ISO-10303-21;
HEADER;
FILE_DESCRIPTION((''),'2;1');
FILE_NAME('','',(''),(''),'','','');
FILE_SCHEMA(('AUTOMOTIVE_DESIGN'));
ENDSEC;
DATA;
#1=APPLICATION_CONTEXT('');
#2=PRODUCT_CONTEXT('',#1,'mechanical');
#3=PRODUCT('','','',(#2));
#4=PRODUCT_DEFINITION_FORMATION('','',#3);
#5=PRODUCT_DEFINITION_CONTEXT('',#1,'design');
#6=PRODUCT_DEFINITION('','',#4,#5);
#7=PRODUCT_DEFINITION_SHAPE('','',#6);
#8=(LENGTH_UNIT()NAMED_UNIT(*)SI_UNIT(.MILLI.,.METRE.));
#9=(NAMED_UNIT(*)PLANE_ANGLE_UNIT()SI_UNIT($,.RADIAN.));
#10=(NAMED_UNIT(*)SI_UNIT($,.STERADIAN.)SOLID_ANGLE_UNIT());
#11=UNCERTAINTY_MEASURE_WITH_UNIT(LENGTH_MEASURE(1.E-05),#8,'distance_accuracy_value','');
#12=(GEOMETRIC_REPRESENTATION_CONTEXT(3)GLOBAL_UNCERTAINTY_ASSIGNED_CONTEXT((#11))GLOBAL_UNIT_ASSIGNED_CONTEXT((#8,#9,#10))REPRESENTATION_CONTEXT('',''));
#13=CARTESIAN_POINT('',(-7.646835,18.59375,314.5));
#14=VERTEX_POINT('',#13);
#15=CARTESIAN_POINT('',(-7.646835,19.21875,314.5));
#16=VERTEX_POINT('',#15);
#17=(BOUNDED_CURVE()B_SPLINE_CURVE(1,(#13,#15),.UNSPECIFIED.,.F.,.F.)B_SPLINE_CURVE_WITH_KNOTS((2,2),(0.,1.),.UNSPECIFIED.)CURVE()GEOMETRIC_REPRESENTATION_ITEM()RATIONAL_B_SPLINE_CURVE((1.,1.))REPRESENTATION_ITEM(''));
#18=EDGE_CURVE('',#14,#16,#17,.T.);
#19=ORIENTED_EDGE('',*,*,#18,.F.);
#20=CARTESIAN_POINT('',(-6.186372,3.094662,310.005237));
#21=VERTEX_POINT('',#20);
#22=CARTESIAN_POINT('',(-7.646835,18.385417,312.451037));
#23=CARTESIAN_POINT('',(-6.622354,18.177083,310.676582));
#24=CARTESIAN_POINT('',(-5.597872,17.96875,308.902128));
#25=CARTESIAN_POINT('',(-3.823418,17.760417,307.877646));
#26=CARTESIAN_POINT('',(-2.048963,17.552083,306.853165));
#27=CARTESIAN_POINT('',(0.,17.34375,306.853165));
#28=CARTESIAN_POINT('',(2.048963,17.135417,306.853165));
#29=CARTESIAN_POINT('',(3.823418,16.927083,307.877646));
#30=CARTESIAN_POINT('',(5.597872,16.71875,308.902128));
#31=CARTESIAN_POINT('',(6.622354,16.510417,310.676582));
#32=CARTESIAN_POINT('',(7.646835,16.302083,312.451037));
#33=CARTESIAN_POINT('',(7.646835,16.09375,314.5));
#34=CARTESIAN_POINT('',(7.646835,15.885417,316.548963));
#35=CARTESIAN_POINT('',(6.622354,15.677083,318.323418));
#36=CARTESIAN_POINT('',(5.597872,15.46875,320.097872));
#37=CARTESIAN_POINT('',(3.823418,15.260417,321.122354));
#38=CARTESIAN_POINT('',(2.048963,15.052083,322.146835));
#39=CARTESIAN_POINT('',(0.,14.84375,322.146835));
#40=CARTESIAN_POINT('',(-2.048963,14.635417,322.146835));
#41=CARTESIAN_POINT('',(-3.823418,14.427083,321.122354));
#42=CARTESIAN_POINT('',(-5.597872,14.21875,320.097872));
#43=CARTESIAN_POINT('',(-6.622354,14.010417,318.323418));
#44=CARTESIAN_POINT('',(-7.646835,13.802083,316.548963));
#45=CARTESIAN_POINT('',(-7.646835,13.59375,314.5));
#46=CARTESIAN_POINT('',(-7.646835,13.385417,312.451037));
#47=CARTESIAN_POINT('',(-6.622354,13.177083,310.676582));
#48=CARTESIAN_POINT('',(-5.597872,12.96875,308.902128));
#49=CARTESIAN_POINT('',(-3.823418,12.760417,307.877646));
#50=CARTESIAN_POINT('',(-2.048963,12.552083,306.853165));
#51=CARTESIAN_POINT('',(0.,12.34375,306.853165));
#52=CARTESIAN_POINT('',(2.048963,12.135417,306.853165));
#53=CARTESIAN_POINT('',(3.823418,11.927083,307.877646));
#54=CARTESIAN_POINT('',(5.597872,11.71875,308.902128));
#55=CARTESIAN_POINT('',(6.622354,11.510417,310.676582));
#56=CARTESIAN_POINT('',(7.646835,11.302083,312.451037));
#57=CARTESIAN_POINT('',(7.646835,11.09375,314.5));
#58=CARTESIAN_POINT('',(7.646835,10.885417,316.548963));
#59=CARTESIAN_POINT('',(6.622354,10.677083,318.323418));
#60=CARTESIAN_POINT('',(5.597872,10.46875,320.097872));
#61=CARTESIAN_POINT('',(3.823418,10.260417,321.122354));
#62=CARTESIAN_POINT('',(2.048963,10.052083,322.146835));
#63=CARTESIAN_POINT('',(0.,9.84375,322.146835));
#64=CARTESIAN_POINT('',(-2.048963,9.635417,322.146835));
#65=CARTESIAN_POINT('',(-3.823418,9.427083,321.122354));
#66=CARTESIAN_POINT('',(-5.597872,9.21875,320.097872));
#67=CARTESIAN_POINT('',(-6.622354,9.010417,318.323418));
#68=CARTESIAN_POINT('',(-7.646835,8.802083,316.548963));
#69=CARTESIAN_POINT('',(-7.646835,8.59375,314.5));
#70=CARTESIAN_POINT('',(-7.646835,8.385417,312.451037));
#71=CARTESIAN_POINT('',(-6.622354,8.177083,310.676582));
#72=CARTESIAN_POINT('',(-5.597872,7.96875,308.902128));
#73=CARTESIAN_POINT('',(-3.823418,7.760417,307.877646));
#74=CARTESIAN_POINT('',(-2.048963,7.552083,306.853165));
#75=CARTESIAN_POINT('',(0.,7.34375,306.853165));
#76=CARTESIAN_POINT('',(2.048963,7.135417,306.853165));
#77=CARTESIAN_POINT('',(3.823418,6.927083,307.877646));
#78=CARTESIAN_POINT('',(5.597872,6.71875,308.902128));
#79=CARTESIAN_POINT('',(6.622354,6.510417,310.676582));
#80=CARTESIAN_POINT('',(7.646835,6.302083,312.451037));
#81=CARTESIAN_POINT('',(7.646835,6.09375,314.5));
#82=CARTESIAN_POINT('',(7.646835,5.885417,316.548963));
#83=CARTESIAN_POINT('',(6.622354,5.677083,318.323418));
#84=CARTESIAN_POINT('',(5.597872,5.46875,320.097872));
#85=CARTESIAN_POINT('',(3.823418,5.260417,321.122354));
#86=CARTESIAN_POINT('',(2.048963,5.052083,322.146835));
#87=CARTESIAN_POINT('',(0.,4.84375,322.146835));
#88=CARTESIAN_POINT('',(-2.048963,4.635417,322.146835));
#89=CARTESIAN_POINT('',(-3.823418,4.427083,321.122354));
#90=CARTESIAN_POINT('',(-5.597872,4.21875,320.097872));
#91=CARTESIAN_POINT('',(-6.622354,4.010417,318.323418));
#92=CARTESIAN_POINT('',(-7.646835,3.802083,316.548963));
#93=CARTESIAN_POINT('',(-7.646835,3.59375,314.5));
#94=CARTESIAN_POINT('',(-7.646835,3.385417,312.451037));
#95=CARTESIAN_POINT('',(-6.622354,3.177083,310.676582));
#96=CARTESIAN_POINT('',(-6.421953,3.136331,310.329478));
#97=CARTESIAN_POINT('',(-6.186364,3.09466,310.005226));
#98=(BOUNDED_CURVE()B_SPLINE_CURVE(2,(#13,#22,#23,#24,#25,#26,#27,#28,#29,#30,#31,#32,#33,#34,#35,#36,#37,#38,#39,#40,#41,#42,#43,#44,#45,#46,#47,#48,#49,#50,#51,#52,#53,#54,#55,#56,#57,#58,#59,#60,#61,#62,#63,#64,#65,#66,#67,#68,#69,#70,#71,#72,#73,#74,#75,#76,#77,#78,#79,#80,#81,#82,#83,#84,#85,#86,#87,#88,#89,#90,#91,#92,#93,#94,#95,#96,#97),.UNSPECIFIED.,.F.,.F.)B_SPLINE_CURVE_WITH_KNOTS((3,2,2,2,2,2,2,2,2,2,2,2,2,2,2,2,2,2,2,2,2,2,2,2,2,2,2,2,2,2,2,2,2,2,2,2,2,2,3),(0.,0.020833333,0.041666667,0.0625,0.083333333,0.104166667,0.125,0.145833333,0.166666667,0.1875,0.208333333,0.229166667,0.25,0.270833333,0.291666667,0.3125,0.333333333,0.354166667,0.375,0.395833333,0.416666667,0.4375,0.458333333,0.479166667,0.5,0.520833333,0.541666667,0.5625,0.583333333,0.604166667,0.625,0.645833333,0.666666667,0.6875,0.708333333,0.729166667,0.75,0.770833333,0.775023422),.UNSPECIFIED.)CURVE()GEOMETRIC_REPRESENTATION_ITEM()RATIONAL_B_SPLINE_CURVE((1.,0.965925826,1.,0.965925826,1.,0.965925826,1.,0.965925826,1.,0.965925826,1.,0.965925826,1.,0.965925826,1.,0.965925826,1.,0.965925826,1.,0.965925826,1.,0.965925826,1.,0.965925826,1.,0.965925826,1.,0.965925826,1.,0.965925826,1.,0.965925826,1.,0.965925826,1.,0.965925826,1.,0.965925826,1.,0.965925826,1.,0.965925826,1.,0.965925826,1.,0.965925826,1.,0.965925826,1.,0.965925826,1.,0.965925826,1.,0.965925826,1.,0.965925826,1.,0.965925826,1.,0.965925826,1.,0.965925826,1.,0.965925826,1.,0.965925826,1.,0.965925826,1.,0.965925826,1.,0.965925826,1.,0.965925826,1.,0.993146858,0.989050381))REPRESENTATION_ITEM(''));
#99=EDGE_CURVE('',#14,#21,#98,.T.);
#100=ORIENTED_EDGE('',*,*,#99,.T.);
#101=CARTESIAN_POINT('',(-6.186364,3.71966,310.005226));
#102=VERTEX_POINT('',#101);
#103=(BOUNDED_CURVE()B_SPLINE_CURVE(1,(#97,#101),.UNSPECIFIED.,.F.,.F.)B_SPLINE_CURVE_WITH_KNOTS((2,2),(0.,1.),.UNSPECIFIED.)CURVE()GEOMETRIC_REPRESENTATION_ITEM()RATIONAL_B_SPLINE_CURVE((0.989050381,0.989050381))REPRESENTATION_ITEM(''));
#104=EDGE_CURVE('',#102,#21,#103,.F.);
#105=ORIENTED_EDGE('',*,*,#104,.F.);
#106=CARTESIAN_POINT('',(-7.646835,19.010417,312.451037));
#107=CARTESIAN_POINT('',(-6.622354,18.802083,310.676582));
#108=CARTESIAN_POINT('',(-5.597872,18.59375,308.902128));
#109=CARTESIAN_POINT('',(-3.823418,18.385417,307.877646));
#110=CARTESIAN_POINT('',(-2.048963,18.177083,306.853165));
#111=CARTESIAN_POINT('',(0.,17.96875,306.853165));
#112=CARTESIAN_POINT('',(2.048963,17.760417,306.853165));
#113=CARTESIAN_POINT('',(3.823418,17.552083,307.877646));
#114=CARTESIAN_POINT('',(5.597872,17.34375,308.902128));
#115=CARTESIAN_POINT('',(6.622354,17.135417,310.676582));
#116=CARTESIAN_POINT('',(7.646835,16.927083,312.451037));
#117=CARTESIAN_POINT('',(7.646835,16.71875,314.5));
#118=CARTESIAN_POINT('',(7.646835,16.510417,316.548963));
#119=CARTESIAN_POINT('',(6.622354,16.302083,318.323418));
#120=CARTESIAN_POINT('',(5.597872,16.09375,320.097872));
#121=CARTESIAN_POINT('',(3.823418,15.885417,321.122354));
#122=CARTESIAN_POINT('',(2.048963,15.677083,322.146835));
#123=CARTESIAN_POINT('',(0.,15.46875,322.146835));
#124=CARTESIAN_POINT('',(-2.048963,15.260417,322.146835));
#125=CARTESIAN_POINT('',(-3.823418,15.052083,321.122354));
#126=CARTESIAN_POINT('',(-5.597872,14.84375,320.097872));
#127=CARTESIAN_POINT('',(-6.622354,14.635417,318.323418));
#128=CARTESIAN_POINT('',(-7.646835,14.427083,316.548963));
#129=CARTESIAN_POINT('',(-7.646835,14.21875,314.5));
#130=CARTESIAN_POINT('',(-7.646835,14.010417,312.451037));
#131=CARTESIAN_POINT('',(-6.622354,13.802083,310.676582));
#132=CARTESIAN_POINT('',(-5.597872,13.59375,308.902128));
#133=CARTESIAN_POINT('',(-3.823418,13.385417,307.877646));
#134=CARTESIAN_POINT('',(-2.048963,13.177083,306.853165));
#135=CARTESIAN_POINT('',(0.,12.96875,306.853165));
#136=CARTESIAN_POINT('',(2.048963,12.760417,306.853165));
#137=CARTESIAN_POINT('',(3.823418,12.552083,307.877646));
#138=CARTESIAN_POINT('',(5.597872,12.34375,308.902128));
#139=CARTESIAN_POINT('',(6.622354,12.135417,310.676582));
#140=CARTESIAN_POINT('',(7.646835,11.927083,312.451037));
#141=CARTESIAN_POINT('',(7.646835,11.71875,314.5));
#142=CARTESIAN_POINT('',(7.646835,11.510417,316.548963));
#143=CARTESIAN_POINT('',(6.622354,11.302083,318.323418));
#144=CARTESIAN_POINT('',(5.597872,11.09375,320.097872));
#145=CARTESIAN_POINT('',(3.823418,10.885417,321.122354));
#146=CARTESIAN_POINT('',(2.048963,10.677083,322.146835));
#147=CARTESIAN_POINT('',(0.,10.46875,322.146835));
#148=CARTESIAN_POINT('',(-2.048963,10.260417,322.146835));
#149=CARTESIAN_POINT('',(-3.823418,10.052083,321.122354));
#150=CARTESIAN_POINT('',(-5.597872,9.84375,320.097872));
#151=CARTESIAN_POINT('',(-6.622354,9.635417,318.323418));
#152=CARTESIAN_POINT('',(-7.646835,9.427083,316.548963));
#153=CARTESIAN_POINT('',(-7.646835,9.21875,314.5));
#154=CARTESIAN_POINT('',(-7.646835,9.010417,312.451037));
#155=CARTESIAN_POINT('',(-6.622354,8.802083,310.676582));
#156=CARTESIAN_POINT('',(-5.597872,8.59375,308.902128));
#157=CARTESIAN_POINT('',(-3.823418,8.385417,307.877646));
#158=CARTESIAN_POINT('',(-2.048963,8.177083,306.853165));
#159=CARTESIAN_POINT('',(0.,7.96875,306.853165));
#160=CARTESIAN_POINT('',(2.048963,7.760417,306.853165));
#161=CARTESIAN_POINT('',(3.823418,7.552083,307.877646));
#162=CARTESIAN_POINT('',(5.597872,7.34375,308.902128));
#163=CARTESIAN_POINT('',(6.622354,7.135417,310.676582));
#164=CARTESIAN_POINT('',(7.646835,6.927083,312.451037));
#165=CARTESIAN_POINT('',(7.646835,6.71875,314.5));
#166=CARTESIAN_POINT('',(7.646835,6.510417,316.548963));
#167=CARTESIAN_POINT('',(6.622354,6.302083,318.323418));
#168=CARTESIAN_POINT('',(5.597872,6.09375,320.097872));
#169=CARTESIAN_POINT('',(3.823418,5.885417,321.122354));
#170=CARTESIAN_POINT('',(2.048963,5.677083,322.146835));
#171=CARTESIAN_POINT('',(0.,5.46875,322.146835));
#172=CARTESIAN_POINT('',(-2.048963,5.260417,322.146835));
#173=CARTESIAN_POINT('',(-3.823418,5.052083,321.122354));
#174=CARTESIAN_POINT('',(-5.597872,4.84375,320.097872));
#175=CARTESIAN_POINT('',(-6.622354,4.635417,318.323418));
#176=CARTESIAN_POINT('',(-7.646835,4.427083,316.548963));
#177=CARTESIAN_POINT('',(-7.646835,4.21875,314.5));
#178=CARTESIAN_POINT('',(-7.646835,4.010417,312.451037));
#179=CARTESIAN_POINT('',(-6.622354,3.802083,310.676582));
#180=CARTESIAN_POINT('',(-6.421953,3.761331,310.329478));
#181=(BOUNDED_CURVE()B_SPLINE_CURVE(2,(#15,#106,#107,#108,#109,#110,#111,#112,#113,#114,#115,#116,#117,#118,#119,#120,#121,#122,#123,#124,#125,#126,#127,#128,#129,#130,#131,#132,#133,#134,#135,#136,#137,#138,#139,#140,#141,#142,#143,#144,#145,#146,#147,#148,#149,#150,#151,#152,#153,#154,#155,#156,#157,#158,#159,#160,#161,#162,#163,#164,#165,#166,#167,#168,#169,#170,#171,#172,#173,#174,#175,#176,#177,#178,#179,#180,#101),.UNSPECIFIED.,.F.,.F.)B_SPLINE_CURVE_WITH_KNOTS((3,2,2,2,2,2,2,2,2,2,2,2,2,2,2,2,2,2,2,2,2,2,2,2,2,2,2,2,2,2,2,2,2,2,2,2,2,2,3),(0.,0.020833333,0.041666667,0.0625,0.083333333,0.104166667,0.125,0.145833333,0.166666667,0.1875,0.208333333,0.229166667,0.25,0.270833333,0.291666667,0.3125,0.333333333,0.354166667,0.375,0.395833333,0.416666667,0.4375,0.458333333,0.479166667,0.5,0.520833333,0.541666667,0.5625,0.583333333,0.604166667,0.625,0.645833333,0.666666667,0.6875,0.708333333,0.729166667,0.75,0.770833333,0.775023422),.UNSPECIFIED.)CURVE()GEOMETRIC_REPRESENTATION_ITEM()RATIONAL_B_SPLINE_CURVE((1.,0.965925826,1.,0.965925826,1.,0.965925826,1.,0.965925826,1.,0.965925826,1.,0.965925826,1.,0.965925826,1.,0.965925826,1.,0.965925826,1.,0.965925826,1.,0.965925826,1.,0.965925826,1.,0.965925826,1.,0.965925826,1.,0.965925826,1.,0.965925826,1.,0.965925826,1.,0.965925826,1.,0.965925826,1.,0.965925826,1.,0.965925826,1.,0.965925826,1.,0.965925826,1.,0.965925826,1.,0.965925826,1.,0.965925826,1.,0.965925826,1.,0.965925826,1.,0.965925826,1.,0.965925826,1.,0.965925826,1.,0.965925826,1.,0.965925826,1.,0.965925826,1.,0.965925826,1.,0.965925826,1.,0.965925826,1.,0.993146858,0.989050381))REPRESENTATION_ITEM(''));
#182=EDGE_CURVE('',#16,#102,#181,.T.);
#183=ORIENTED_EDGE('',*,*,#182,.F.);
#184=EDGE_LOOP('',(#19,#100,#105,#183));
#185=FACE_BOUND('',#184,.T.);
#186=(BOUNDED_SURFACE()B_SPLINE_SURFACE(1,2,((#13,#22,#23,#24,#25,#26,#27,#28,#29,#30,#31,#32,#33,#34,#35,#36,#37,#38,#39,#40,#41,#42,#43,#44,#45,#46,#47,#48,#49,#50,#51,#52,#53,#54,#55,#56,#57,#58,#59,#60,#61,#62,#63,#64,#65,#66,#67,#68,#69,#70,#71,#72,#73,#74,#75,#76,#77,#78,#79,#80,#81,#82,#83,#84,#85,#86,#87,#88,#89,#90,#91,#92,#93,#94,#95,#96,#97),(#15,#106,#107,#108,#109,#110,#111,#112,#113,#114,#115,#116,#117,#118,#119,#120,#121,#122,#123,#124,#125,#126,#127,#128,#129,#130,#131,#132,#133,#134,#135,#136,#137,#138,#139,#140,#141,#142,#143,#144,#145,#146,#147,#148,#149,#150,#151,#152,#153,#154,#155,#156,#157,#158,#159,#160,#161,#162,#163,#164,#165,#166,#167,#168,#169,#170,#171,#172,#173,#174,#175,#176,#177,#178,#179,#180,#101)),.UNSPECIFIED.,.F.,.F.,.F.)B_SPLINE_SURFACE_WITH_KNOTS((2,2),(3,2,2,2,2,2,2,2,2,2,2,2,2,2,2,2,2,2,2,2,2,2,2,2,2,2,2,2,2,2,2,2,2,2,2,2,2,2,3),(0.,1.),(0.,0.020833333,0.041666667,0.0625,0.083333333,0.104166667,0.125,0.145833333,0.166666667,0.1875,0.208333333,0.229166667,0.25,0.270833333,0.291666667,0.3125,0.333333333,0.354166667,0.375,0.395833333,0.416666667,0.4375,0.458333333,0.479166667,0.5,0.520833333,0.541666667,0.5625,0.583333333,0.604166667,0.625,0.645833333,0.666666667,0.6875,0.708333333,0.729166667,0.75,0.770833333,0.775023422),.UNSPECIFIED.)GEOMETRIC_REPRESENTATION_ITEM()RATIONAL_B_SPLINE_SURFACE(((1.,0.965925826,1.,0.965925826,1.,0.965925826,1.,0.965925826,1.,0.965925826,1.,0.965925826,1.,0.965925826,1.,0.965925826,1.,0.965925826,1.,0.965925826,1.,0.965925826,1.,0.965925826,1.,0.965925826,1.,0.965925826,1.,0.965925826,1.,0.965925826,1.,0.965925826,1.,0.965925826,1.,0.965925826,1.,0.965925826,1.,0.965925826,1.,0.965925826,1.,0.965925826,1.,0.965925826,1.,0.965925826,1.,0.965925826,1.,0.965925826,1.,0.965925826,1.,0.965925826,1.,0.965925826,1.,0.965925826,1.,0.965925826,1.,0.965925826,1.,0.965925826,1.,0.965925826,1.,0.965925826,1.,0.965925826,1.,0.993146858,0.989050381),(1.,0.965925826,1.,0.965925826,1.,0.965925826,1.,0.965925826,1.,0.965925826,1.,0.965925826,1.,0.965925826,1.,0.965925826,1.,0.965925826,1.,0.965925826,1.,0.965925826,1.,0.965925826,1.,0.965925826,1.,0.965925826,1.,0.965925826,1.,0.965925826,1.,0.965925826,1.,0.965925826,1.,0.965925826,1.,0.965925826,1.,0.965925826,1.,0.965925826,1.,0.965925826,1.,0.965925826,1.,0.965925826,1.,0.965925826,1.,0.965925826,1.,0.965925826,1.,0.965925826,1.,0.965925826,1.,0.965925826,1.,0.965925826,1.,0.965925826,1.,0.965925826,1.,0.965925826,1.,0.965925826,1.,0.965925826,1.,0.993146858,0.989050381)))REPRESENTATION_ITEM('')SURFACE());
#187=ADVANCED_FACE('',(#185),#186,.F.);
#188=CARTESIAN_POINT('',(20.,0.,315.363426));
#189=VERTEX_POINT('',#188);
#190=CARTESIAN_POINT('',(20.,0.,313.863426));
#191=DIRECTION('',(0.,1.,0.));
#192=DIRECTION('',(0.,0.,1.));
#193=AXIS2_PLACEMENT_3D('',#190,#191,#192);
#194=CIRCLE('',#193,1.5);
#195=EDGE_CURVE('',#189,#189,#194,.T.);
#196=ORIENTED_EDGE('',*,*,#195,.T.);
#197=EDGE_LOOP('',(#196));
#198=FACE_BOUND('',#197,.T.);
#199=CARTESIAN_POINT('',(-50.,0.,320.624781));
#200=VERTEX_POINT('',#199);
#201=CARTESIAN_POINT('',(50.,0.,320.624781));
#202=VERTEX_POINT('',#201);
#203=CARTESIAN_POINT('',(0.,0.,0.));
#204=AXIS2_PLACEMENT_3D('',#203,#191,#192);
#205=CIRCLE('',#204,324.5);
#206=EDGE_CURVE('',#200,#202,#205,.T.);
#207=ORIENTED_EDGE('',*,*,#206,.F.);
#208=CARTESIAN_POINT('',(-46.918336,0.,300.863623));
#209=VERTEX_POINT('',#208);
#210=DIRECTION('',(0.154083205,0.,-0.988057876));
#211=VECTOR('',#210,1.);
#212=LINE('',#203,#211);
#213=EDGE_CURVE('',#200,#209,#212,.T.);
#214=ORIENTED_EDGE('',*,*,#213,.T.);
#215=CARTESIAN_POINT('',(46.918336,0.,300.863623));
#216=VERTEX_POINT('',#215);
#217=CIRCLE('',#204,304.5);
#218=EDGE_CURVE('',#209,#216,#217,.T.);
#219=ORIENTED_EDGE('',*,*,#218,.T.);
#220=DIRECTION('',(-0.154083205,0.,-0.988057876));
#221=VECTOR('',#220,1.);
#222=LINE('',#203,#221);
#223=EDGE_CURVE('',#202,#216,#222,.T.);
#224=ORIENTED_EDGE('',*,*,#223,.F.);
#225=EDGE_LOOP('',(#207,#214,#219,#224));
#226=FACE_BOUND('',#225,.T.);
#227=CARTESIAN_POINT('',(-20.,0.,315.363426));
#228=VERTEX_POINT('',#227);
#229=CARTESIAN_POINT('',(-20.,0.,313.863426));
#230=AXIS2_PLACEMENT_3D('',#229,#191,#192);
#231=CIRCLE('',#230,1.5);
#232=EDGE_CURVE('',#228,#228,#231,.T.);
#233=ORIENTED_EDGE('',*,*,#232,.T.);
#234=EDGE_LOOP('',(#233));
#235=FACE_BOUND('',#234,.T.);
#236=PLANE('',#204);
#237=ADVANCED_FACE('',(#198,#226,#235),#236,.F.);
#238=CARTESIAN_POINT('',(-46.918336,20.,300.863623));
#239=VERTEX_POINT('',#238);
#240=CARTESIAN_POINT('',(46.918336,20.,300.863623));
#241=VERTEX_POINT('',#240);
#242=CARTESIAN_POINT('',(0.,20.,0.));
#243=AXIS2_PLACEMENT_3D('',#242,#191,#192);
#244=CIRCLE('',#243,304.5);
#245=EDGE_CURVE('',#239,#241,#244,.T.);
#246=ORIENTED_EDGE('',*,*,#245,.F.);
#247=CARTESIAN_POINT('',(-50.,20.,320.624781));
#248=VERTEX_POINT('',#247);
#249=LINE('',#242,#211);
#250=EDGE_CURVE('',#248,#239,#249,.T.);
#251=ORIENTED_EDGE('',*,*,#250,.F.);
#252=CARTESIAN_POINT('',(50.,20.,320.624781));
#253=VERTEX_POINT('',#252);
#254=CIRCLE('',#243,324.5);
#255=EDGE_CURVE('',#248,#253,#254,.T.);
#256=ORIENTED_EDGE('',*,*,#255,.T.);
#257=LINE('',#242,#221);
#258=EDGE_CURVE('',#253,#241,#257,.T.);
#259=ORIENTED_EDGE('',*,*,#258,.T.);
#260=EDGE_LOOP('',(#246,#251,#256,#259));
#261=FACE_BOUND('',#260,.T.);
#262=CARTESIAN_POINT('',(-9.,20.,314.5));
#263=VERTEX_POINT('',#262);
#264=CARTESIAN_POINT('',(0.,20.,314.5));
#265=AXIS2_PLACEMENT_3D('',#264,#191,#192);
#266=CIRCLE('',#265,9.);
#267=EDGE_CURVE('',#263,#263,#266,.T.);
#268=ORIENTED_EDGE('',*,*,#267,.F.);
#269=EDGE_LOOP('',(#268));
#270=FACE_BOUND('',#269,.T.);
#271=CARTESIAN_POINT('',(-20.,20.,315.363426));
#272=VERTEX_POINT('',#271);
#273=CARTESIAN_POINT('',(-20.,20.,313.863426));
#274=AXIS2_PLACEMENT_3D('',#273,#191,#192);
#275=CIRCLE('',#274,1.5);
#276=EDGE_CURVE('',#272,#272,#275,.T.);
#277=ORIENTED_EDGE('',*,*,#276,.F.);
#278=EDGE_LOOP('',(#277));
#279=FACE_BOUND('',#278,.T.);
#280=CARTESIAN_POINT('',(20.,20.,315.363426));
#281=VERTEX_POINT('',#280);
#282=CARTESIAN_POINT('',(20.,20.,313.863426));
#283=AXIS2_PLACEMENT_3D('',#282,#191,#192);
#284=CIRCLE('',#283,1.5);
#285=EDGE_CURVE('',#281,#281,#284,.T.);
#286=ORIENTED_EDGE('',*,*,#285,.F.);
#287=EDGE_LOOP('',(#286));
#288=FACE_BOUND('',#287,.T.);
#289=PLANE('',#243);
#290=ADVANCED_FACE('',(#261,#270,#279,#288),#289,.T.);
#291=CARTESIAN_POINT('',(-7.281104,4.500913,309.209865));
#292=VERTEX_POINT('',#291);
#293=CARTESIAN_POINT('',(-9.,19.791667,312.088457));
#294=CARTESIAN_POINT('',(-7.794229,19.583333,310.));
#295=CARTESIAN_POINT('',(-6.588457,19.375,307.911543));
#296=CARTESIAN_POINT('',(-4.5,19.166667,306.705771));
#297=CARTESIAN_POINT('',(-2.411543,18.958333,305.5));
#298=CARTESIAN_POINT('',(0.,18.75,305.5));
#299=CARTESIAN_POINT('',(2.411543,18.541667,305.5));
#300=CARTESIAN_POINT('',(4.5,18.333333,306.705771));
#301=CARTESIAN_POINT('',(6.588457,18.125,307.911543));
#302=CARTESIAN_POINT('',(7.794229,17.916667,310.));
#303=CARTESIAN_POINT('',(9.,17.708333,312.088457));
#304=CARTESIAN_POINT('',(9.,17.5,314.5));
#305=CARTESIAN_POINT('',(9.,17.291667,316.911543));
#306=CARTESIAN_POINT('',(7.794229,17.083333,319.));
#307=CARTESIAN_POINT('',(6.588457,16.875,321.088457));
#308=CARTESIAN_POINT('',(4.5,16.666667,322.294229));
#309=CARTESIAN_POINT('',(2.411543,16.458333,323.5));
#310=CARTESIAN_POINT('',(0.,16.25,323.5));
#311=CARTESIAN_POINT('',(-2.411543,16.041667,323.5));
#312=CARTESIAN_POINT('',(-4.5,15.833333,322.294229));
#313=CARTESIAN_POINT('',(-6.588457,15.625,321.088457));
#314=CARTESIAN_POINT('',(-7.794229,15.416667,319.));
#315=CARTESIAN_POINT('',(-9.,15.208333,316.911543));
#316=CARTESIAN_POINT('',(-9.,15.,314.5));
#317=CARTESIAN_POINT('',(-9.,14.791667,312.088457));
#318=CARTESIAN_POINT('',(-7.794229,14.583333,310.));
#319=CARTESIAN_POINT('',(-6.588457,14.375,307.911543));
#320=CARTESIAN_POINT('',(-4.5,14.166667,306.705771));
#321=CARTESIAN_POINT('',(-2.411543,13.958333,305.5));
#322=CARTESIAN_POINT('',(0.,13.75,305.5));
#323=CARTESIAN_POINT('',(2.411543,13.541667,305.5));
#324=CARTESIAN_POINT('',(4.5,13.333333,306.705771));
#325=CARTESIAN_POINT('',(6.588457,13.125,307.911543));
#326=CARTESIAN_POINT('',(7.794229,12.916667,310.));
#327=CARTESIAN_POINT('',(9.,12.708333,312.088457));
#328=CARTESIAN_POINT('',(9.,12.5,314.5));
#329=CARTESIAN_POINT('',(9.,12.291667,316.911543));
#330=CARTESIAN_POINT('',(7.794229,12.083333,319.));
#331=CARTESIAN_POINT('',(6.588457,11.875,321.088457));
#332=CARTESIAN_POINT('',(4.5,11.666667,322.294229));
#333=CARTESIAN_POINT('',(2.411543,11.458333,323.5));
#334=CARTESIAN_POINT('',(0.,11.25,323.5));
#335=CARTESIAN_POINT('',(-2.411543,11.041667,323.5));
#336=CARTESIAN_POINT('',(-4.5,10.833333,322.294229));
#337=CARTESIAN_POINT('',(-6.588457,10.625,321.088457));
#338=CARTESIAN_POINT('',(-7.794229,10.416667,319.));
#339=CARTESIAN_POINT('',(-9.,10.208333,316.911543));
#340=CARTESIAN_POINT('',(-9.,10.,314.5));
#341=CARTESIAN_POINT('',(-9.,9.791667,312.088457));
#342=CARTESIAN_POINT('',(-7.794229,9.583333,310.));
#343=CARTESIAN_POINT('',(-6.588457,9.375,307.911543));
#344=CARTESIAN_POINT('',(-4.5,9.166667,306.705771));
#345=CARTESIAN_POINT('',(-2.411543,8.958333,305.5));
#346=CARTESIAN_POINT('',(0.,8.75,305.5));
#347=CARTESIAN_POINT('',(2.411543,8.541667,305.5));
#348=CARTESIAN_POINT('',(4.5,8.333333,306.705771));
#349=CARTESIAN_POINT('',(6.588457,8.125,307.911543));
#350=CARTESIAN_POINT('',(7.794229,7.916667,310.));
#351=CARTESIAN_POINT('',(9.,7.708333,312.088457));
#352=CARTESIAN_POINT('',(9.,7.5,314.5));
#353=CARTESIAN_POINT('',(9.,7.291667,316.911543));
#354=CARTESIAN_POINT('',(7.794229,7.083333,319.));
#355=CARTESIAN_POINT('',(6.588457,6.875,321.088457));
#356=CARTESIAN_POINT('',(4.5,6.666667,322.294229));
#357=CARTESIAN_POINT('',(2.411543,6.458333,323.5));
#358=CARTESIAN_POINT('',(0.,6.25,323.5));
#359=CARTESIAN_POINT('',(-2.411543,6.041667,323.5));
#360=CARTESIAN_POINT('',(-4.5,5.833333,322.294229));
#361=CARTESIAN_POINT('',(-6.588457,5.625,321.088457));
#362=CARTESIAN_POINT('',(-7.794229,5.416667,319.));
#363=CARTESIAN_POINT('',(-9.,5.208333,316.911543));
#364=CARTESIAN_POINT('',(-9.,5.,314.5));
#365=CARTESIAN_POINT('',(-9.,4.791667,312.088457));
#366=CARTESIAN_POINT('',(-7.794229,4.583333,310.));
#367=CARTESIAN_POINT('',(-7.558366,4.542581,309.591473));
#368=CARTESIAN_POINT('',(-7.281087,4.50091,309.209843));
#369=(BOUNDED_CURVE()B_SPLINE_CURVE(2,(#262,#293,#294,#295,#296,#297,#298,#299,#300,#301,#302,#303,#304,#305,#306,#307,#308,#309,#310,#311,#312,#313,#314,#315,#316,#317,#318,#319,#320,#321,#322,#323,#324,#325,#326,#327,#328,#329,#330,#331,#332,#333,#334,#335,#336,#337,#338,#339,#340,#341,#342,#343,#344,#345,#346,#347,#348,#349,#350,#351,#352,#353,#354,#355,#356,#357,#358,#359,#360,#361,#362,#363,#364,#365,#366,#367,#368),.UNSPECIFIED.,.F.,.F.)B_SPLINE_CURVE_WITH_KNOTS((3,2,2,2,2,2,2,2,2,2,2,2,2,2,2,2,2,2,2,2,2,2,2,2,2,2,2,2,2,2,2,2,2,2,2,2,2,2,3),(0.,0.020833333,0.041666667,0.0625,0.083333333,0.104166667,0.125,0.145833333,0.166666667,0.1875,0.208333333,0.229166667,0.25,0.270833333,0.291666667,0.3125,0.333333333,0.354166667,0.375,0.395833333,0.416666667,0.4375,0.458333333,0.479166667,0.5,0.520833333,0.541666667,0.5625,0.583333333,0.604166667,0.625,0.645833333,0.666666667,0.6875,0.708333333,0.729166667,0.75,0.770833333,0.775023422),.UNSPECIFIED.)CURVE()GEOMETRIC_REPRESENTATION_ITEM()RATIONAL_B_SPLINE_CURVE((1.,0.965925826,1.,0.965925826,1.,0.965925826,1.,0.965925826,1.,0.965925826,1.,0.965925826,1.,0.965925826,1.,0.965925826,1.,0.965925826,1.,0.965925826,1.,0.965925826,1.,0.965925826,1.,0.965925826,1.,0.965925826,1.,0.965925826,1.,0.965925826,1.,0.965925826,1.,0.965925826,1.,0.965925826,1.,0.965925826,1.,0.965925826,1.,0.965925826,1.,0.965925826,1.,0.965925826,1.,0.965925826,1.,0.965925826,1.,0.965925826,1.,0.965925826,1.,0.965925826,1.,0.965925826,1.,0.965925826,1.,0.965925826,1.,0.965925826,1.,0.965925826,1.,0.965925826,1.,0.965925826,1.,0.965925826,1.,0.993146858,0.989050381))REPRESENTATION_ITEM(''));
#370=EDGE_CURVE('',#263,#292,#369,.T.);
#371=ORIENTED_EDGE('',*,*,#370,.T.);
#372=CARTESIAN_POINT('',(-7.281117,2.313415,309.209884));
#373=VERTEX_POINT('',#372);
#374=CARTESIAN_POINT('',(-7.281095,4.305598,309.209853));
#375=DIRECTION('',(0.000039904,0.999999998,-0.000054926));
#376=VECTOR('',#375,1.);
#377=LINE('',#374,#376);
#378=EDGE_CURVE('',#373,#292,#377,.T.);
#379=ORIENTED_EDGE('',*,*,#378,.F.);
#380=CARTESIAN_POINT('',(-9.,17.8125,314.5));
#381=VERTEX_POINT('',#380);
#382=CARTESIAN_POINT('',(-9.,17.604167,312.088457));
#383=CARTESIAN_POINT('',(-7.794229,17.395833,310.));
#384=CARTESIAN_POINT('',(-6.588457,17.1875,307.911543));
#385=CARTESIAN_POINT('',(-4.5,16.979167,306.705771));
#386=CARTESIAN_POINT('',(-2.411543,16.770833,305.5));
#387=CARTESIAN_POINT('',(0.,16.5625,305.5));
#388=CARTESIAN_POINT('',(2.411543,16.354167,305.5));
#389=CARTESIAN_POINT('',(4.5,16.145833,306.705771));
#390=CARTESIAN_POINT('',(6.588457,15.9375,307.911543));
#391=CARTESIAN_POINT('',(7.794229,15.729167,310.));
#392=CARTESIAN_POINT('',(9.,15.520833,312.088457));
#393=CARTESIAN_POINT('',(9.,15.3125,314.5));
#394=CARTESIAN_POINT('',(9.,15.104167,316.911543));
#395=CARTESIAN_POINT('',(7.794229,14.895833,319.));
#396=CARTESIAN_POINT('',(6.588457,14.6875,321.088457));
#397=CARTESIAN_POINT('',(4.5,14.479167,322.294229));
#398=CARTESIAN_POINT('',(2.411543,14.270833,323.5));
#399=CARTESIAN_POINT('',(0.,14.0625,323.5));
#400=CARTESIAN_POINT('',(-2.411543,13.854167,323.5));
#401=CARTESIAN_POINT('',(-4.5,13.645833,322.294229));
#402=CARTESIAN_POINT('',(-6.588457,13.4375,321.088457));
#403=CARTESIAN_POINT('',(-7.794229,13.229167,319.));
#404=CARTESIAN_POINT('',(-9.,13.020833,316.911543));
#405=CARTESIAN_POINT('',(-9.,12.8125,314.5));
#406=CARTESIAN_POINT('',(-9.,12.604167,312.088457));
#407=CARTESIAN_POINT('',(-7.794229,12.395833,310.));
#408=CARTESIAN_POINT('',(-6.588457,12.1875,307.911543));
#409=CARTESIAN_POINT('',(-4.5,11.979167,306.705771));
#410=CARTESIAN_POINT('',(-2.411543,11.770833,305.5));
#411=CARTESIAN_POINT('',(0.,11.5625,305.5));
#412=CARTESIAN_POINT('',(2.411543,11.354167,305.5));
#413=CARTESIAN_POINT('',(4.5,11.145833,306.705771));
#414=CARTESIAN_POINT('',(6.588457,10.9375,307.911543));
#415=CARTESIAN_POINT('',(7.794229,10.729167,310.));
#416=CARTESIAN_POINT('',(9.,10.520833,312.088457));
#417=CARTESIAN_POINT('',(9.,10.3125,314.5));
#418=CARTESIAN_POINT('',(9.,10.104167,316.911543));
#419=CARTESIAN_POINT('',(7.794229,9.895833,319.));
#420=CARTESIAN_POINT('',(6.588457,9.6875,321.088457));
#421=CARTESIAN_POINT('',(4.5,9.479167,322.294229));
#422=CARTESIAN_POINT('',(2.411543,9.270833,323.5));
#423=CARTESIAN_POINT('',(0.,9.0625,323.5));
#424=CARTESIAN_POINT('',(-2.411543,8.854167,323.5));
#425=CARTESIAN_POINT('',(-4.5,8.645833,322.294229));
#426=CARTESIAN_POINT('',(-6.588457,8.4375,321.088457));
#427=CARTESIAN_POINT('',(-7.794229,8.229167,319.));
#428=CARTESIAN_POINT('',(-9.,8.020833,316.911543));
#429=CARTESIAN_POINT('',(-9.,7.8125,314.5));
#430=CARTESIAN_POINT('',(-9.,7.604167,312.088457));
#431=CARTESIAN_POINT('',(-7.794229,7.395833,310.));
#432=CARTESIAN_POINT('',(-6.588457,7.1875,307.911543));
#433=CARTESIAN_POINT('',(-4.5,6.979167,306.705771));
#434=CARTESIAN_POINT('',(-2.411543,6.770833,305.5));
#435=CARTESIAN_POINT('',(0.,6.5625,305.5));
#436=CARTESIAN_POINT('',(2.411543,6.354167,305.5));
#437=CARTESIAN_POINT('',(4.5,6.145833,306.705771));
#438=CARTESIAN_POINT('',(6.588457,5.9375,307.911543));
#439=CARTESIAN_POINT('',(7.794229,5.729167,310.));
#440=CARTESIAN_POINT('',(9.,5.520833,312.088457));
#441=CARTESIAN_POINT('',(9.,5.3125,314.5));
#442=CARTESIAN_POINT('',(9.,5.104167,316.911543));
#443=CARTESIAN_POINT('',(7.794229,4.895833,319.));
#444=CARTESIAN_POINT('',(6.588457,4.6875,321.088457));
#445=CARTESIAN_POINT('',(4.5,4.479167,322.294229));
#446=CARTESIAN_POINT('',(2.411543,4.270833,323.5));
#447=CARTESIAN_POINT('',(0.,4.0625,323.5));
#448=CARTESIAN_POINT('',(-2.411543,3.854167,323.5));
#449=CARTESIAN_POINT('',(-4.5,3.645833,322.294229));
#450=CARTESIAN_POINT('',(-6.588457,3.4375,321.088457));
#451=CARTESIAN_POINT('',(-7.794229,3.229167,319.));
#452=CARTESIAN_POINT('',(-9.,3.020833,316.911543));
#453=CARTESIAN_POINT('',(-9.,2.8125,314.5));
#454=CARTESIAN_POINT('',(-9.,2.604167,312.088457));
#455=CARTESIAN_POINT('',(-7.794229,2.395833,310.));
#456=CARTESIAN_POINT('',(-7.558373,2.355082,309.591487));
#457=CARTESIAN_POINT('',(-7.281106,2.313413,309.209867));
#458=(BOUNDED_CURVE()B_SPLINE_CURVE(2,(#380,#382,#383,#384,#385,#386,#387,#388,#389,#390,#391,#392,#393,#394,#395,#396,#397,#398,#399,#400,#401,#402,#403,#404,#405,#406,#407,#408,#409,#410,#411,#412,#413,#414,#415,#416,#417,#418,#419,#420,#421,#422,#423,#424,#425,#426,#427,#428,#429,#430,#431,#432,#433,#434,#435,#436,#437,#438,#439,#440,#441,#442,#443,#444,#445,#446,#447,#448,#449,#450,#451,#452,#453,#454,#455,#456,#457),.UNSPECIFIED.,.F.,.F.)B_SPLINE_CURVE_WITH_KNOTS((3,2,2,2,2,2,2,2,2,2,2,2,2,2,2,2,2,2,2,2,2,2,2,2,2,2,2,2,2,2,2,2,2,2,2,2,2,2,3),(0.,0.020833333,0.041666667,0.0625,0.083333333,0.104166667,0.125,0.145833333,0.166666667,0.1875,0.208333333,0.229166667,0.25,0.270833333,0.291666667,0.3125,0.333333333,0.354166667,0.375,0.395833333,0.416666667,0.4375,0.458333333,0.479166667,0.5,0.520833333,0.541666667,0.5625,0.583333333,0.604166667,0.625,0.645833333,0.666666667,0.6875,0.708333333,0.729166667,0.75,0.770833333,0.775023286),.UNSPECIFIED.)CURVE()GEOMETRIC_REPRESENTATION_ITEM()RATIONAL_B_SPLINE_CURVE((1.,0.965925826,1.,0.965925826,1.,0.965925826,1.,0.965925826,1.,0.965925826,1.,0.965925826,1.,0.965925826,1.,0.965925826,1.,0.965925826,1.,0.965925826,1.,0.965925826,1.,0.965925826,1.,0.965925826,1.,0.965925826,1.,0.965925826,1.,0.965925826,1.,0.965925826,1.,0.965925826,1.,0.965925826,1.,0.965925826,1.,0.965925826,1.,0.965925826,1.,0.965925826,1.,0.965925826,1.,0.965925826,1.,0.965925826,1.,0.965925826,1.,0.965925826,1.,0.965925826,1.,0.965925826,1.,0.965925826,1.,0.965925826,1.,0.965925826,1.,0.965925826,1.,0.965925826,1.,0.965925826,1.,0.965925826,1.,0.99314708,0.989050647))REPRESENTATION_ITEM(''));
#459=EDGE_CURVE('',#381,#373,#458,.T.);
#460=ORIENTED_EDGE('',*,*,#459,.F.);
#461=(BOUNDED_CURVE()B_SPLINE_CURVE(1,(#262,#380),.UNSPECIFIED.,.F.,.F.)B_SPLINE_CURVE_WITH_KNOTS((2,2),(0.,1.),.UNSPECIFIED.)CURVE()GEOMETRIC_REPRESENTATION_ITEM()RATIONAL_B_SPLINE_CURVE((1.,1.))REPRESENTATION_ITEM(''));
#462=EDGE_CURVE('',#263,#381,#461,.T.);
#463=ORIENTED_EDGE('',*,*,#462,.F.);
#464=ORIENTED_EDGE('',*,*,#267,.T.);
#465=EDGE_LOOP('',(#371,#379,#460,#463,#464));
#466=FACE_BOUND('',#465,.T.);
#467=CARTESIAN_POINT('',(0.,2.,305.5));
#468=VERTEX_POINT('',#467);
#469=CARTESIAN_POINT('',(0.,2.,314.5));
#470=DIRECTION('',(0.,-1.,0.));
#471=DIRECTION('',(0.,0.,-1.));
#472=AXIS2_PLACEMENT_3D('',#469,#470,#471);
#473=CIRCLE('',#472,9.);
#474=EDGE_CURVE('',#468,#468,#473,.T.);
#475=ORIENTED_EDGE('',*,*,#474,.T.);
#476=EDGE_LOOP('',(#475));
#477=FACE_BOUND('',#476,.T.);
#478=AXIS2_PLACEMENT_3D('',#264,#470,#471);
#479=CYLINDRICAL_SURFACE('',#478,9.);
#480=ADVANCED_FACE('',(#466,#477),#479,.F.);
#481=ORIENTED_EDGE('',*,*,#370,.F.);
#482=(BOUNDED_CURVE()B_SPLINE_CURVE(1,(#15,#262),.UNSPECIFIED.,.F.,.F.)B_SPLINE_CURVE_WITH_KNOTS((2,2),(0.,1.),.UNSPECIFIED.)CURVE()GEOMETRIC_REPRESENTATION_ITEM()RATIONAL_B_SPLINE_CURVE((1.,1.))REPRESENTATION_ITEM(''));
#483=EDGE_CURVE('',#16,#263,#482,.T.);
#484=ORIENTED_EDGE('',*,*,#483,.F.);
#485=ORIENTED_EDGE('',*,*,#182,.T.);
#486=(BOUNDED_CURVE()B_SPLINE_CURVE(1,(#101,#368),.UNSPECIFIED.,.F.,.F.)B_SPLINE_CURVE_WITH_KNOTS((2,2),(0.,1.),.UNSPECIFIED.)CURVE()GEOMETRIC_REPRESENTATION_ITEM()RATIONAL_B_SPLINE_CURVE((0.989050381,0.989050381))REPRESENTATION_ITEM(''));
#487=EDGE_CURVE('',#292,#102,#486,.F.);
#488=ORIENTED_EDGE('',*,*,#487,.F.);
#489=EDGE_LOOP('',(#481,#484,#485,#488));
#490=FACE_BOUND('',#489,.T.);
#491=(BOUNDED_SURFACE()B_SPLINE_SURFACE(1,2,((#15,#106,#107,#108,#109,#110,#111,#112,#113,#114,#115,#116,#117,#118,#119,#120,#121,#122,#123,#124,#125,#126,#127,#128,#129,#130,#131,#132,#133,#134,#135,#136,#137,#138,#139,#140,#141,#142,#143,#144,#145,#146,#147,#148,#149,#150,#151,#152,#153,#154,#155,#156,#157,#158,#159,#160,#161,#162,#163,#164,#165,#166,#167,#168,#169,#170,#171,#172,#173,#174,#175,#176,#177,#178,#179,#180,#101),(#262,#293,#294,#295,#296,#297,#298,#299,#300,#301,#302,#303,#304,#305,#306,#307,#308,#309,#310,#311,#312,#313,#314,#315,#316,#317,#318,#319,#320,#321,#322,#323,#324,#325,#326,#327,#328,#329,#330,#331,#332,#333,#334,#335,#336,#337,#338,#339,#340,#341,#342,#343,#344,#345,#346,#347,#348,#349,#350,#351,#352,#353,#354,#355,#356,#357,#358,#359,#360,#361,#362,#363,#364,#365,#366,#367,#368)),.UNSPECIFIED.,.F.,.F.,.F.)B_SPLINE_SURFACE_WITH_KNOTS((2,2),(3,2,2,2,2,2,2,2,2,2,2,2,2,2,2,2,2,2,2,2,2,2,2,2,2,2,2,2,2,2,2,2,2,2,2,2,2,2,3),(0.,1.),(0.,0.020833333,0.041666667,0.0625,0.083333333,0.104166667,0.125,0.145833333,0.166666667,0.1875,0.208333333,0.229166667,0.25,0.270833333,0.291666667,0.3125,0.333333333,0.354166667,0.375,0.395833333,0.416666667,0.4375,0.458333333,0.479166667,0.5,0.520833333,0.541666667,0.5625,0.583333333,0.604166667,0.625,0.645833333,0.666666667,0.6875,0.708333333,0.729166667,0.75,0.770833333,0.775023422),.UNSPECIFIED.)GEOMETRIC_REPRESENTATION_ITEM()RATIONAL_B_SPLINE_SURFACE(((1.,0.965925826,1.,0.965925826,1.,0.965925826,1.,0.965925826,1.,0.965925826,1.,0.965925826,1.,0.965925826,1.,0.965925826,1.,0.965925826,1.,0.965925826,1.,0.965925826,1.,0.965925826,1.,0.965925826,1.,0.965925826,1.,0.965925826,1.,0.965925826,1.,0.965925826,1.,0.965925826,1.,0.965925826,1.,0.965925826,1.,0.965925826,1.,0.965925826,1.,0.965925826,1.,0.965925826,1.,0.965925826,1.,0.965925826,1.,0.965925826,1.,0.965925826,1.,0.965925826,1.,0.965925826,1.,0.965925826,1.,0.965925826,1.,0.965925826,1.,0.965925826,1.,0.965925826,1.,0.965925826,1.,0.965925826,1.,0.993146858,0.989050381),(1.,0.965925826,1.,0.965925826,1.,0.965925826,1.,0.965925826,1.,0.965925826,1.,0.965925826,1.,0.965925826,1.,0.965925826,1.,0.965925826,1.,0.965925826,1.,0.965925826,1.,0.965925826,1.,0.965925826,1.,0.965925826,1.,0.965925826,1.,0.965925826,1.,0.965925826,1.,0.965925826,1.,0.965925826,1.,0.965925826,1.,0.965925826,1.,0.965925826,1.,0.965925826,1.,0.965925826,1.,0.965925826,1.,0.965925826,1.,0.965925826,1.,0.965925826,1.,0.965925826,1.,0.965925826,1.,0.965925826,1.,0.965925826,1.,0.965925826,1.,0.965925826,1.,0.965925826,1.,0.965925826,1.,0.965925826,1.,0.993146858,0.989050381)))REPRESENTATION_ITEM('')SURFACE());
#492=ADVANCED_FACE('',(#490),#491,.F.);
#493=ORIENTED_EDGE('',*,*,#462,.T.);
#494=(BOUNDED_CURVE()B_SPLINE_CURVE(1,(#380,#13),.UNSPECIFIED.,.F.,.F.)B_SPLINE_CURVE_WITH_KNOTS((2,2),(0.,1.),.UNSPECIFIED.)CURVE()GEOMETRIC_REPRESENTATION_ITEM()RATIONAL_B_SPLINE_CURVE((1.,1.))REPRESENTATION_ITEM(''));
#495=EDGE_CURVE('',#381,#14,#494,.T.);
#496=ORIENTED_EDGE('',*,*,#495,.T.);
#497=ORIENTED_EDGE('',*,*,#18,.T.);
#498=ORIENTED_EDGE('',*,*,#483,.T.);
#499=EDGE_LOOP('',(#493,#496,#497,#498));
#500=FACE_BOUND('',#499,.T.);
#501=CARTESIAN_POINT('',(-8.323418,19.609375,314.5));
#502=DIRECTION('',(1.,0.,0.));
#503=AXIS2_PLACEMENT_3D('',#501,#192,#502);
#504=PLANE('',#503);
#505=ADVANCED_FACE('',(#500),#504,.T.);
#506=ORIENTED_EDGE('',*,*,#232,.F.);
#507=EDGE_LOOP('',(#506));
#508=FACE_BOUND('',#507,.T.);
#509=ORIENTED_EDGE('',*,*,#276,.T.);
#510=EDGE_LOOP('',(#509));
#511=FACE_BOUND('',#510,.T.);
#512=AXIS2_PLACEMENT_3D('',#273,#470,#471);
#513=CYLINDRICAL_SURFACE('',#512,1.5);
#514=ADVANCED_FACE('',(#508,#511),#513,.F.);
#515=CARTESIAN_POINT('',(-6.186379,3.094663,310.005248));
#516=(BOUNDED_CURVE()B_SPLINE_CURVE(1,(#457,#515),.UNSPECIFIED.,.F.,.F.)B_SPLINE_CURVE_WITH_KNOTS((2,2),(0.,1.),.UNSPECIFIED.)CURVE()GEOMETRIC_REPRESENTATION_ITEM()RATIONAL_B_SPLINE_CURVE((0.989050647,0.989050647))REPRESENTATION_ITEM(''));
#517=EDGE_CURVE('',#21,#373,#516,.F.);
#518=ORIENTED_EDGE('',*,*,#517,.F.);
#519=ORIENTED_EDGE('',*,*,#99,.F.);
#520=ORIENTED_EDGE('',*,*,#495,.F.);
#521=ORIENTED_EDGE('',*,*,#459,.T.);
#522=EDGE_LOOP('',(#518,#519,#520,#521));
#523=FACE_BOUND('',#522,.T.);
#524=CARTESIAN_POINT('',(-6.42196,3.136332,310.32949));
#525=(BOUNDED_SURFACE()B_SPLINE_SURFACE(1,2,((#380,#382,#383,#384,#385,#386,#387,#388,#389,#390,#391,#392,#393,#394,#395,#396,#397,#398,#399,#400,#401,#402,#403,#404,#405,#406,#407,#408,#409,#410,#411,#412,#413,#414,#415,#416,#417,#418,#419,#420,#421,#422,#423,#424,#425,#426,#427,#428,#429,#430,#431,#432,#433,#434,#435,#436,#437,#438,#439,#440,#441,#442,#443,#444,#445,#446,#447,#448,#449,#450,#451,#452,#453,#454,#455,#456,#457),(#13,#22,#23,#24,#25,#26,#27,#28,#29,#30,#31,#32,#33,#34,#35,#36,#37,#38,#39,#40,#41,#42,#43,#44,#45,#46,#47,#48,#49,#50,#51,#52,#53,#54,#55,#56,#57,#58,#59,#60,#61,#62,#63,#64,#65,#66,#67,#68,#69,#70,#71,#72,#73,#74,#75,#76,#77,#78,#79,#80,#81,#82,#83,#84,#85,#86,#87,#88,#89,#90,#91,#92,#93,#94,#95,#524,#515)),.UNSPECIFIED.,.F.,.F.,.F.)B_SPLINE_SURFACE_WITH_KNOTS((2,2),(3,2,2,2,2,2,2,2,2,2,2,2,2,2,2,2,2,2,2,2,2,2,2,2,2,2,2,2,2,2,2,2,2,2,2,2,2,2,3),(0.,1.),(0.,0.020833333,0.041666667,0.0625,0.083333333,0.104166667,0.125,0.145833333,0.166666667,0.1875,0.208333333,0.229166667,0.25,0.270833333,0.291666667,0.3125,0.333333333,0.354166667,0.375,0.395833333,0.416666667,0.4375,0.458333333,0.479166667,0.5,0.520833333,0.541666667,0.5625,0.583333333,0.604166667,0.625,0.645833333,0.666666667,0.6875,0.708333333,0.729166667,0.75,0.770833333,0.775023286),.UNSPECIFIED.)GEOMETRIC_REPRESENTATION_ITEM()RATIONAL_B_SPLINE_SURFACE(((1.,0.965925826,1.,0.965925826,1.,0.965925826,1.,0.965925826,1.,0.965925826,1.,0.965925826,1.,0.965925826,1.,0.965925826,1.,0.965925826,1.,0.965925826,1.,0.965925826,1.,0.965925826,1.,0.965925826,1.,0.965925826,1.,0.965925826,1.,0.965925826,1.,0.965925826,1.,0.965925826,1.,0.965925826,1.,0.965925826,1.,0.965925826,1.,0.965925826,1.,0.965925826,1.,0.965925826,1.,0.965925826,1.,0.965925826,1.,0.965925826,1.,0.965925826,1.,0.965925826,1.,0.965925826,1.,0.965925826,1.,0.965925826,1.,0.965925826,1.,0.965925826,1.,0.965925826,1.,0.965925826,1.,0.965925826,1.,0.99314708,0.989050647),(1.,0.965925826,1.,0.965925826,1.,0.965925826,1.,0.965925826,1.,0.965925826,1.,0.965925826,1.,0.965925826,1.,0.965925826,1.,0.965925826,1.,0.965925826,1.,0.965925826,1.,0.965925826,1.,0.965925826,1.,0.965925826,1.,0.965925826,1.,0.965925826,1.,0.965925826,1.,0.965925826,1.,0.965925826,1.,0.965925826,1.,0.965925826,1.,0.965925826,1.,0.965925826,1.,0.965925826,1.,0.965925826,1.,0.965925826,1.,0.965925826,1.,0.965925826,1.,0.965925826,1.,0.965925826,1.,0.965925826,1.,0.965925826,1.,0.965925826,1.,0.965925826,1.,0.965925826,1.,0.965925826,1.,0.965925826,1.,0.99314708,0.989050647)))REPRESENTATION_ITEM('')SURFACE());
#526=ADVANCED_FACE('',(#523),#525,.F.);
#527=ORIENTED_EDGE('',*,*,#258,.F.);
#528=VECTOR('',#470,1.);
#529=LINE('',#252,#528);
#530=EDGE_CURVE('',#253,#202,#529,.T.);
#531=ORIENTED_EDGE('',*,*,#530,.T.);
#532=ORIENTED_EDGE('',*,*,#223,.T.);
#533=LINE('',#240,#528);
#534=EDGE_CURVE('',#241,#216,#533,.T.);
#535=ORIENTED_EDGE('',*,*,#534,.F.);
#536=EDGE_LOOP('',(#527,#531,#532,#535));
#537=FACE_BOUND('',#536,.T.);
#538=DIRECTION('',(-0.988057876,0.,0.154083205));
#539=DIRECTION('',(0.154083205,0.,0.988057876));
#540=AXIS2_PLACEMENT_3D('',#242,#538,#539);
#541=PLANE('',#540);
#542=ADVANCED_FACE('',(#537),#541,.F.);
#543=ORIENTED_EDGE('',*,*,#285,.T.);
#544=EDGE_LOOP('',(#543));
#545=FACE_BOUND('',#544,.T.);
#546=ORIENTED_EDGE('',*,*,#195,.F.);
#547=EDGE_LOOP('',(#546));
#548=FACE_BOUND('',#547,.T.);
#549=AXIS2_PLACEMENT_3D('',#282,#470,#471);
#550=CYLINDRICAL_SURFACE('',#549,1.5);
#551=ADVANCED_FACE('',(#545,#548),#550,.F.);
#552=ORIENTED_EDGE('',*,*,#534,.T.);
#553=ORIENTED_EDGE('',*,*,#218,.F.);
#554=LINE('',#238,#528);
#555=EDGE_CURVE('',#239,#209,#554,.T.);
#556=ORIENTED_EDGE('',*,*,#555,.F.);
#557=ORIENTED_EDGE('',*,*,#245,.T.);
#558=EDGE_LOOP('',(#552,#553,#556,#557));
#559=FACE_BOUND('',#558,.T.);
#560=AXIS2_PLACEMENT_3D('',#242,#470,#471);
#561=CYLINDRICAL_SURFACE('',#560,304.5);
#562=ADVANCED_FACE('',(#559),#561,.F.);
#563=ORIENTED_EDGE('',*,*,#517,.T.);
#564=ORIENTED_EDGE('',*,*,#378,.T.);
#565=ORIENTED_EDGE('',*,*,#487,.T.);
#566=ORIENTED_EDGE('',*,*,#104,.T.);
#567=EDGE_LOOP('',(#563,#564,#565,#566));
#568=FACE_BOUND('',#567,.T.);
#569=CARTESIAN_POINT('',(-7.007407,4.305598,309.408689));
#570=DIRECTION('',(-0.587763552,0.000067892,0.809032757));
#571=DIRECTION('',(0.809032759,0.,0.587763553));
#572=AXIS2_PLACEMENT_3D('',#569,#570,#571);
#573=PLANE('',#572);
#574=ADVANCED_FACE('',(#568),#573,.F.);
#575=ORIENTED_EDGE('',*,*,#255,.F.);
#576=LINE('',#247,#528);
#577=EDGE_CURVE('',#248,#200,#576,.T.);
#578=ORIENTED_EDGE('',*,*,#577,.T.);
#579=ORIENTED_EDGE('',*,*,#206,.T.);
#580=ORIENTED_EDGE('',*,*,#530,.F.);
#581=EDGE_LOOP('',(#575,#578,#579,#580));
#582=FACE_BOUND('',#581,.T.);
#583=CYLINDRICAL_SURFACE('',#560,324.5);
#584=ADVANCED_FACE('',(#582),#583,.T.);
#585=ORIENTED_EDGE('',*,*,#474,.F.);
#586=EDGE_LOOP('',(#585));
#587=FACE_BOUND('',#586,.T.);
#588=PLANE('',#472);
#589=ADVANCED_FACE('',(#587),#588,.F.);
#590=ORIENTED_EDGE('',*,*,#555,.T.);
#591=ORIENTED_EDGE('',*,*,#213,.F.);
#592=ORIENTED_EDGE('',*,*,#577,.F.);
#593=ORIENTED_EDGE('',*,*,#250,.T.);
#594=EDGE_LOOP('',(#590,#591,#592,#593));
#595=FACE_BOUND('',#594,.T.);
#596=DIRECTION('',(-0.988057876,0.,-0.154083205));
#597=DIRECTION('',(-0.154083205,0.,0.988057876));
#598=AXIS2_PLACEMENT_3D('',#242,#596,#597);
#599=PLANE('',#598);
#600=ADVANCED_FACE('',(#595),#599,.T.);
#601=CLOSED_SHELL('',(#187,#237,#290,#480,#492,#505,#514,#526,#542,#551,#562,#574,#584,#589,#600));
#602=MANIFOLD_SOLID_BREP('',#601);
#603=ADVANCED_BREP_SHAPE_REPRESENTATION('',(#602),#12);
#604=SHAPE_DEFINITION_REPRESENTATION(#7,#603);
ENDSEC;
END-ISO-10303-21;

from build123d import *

# Parameters (mm, degrees)
SKETCH1_R           = 1.5
SKETCH1_R_2         = 9
BOSS_EXTRUDE1_DEPTH = 20
SKETCH3_R           = 9
BOSS_EXTRUDE2_DEPTH = 2
THREAD1_PITCH       = 5


with BuildPart() as part:
    # Sketch1 → Boss-Extrude1 (new body)
    with BuildSketch(Plane(origin=(0, 0, 0), x_dir=(1, 0, 0), z_dir=(0, 1, 0))):
        with BuildLine():
            ThreePointArc((-50, -320.624780702), (0, -324.5), (50, -320.624780702))
            Line((50, -320.624780702), (46.918335901, -300.863623185))
            ThreePointArc((46.918335901, -300.863623185), (0, -304.5), (-46.918335901, -300.863623185))
            Line((-46.918335901, -300.863623185), (-50, -320.624780702))
        make_face()
        with Locations(Location((-20, -313.863425713, 0), (0, 0, 270))):
            Circle(SKETCH1_R, mode=Mode.SUBTRACT)
        with Locations(Location((0, -314.5, 0), (0, 0, 270))):
            Circle(SKETCH1_R_2, mode=Mode.SUBTRACT)
        with Locations(Location((20, -313.863425713, 0), (0, 0, 270))):
            Circle(SKETCH1_R, mode=Mode.SUBTRACT)
    extrude(amount=BOSS_EXTRUDE1_DEPTH)

    # Sketch3 → Boss-Extrude2 (add)
    with BuildSketch(Plane(origin=(0, 0, 0), x_dir=(-1, 0, 0), z_dir=(0, -1, 0))):
        with Locations(Location((0, -314.5, 0), (0, 0, 90))):
            Circle(SKETCH3_R)
    extrude(amount=-BOSS_EXTRUDE2_DEPTH)

    # Thread1: arcs per turn and ends read off the stored shape
    # Thread1: the profile of Thread Profile1 profile screwed along a right-hand helix through 3.100003 turns, 12 arcs to a turn; built about Z, then put on its axis
    thread1_z = Axis((0, 0, 0), (0, 0, 1))
    thread1_corners = [(9.0003, 0, -0.000173205), (9.0003, 0, 2.187673198), (7.646835313, 0, 1.406249997), (7.646835313, 0, 0.781249997)]
    with BuildLine(mode=Mode.PRIVATE) as thread1_profile:
        Line(thread1_corners[0], thread1_corners[1])
        Line(thread1_corners[1], thread1_corners[2])
        Line(thread1_corners[2], thread1_corners[3])
        Line(thread1_corners[3], thread1_corners[0])
    thread1_cap = Face(thread1_profile.wire())
    thread1_turn_angles = [0, 15, 30, 45, 60, 75, 90, 105, 120, 135, 150, 165, 180, 195, 210, 225, 240, 255, 270, 285, 300, 315, 330, 345, 360]
    thread1_turn_weights = [1, 0.9659258262890683, 1, 0.9659258262890683, 1, 0.9659258262890683, 1, 0.9659258262890683, 1, 0.9659258262890683, 1, 0.9659258262890683, 1, 0.9659258262890683, 1, 0.9659258262890683, 1, 0.9659258262890683, 1, 0.9659258262890683, 1, 0.9659258262890683, 1, 0.9659258262890683, 1]
    thread1_turn_rails = [Edge.make_bspline([Vector(p[0], p[1], 0).rotate(thread1_z, thread1_turn_angles[k]) / thread1_turn_weights[k] + Vector(0, 0, p[2] + THREAD1_PITCH * thread1_turn_angles[k] / 360) for k in range(25)], [0, 0, 0, 1, 1, 2, 2, 3, 3, 4, 4, 5, 5, 6, 6, 7, 7, 8, 8, 9, 9, 10, 10, 11, 11, 12, 12, 12], 2, thread1_turn_weights) for p in thread1_corners]
    thread1_turn_sides = [Face.make_surface_from_curves(thread1_turn_rails[p[0]], thread1_turn_rails[p[1]]) for p in [(0, 1), (1, 2), (2, 3), (3, 0)]]
    thread1_last_angles = [1080, 1095, 1110, 1113.0005, 1116.001]
    thread1_last_weights = [1, 0.9659258262890683, 1, 0.9986290779991721, 1]
    thread1_last_rails = [Edge.make_bspline([Vector(p[0], p[1], 0).rotate(thread1_z, thread1_last_angles[k]) / thread1_last_weights[k] + Vector(0, 0, p[2] + THREAD1_PITCH * thread1_last_angles[k] / 360) for k in range(5)], [0, 0, 0, 1, 1, 2, 2, 2], 2, thread1_last_weights) for p in thread1_corners]
    thread1_last_sides = [Face.make_surface_from_curves(thread1_last_rails[p[0]], thread1_last_rails[p[1]]) for p in [(0, 1), (1, 2), (2, 3), (3, 0)]]
    thread1 = Plane(origin=(0, 20, 314.5), x_dir=(-1, 0, 0), z_dir=(0, -1, 0)) * Solid(Shell([*[p.moved(Location((0, 0, THREAD1_PITCH * i))) for i in range(3) for p in thread1_turn_sides], *thread1_last_sides, thread1_cap, thread1_cap.rotate(thread1_z, 1116.001).moved(Location((0, 0, THREAD1_PITCH * 1116.001 / 360)))]))
    add(thread1)


solid = part.part
